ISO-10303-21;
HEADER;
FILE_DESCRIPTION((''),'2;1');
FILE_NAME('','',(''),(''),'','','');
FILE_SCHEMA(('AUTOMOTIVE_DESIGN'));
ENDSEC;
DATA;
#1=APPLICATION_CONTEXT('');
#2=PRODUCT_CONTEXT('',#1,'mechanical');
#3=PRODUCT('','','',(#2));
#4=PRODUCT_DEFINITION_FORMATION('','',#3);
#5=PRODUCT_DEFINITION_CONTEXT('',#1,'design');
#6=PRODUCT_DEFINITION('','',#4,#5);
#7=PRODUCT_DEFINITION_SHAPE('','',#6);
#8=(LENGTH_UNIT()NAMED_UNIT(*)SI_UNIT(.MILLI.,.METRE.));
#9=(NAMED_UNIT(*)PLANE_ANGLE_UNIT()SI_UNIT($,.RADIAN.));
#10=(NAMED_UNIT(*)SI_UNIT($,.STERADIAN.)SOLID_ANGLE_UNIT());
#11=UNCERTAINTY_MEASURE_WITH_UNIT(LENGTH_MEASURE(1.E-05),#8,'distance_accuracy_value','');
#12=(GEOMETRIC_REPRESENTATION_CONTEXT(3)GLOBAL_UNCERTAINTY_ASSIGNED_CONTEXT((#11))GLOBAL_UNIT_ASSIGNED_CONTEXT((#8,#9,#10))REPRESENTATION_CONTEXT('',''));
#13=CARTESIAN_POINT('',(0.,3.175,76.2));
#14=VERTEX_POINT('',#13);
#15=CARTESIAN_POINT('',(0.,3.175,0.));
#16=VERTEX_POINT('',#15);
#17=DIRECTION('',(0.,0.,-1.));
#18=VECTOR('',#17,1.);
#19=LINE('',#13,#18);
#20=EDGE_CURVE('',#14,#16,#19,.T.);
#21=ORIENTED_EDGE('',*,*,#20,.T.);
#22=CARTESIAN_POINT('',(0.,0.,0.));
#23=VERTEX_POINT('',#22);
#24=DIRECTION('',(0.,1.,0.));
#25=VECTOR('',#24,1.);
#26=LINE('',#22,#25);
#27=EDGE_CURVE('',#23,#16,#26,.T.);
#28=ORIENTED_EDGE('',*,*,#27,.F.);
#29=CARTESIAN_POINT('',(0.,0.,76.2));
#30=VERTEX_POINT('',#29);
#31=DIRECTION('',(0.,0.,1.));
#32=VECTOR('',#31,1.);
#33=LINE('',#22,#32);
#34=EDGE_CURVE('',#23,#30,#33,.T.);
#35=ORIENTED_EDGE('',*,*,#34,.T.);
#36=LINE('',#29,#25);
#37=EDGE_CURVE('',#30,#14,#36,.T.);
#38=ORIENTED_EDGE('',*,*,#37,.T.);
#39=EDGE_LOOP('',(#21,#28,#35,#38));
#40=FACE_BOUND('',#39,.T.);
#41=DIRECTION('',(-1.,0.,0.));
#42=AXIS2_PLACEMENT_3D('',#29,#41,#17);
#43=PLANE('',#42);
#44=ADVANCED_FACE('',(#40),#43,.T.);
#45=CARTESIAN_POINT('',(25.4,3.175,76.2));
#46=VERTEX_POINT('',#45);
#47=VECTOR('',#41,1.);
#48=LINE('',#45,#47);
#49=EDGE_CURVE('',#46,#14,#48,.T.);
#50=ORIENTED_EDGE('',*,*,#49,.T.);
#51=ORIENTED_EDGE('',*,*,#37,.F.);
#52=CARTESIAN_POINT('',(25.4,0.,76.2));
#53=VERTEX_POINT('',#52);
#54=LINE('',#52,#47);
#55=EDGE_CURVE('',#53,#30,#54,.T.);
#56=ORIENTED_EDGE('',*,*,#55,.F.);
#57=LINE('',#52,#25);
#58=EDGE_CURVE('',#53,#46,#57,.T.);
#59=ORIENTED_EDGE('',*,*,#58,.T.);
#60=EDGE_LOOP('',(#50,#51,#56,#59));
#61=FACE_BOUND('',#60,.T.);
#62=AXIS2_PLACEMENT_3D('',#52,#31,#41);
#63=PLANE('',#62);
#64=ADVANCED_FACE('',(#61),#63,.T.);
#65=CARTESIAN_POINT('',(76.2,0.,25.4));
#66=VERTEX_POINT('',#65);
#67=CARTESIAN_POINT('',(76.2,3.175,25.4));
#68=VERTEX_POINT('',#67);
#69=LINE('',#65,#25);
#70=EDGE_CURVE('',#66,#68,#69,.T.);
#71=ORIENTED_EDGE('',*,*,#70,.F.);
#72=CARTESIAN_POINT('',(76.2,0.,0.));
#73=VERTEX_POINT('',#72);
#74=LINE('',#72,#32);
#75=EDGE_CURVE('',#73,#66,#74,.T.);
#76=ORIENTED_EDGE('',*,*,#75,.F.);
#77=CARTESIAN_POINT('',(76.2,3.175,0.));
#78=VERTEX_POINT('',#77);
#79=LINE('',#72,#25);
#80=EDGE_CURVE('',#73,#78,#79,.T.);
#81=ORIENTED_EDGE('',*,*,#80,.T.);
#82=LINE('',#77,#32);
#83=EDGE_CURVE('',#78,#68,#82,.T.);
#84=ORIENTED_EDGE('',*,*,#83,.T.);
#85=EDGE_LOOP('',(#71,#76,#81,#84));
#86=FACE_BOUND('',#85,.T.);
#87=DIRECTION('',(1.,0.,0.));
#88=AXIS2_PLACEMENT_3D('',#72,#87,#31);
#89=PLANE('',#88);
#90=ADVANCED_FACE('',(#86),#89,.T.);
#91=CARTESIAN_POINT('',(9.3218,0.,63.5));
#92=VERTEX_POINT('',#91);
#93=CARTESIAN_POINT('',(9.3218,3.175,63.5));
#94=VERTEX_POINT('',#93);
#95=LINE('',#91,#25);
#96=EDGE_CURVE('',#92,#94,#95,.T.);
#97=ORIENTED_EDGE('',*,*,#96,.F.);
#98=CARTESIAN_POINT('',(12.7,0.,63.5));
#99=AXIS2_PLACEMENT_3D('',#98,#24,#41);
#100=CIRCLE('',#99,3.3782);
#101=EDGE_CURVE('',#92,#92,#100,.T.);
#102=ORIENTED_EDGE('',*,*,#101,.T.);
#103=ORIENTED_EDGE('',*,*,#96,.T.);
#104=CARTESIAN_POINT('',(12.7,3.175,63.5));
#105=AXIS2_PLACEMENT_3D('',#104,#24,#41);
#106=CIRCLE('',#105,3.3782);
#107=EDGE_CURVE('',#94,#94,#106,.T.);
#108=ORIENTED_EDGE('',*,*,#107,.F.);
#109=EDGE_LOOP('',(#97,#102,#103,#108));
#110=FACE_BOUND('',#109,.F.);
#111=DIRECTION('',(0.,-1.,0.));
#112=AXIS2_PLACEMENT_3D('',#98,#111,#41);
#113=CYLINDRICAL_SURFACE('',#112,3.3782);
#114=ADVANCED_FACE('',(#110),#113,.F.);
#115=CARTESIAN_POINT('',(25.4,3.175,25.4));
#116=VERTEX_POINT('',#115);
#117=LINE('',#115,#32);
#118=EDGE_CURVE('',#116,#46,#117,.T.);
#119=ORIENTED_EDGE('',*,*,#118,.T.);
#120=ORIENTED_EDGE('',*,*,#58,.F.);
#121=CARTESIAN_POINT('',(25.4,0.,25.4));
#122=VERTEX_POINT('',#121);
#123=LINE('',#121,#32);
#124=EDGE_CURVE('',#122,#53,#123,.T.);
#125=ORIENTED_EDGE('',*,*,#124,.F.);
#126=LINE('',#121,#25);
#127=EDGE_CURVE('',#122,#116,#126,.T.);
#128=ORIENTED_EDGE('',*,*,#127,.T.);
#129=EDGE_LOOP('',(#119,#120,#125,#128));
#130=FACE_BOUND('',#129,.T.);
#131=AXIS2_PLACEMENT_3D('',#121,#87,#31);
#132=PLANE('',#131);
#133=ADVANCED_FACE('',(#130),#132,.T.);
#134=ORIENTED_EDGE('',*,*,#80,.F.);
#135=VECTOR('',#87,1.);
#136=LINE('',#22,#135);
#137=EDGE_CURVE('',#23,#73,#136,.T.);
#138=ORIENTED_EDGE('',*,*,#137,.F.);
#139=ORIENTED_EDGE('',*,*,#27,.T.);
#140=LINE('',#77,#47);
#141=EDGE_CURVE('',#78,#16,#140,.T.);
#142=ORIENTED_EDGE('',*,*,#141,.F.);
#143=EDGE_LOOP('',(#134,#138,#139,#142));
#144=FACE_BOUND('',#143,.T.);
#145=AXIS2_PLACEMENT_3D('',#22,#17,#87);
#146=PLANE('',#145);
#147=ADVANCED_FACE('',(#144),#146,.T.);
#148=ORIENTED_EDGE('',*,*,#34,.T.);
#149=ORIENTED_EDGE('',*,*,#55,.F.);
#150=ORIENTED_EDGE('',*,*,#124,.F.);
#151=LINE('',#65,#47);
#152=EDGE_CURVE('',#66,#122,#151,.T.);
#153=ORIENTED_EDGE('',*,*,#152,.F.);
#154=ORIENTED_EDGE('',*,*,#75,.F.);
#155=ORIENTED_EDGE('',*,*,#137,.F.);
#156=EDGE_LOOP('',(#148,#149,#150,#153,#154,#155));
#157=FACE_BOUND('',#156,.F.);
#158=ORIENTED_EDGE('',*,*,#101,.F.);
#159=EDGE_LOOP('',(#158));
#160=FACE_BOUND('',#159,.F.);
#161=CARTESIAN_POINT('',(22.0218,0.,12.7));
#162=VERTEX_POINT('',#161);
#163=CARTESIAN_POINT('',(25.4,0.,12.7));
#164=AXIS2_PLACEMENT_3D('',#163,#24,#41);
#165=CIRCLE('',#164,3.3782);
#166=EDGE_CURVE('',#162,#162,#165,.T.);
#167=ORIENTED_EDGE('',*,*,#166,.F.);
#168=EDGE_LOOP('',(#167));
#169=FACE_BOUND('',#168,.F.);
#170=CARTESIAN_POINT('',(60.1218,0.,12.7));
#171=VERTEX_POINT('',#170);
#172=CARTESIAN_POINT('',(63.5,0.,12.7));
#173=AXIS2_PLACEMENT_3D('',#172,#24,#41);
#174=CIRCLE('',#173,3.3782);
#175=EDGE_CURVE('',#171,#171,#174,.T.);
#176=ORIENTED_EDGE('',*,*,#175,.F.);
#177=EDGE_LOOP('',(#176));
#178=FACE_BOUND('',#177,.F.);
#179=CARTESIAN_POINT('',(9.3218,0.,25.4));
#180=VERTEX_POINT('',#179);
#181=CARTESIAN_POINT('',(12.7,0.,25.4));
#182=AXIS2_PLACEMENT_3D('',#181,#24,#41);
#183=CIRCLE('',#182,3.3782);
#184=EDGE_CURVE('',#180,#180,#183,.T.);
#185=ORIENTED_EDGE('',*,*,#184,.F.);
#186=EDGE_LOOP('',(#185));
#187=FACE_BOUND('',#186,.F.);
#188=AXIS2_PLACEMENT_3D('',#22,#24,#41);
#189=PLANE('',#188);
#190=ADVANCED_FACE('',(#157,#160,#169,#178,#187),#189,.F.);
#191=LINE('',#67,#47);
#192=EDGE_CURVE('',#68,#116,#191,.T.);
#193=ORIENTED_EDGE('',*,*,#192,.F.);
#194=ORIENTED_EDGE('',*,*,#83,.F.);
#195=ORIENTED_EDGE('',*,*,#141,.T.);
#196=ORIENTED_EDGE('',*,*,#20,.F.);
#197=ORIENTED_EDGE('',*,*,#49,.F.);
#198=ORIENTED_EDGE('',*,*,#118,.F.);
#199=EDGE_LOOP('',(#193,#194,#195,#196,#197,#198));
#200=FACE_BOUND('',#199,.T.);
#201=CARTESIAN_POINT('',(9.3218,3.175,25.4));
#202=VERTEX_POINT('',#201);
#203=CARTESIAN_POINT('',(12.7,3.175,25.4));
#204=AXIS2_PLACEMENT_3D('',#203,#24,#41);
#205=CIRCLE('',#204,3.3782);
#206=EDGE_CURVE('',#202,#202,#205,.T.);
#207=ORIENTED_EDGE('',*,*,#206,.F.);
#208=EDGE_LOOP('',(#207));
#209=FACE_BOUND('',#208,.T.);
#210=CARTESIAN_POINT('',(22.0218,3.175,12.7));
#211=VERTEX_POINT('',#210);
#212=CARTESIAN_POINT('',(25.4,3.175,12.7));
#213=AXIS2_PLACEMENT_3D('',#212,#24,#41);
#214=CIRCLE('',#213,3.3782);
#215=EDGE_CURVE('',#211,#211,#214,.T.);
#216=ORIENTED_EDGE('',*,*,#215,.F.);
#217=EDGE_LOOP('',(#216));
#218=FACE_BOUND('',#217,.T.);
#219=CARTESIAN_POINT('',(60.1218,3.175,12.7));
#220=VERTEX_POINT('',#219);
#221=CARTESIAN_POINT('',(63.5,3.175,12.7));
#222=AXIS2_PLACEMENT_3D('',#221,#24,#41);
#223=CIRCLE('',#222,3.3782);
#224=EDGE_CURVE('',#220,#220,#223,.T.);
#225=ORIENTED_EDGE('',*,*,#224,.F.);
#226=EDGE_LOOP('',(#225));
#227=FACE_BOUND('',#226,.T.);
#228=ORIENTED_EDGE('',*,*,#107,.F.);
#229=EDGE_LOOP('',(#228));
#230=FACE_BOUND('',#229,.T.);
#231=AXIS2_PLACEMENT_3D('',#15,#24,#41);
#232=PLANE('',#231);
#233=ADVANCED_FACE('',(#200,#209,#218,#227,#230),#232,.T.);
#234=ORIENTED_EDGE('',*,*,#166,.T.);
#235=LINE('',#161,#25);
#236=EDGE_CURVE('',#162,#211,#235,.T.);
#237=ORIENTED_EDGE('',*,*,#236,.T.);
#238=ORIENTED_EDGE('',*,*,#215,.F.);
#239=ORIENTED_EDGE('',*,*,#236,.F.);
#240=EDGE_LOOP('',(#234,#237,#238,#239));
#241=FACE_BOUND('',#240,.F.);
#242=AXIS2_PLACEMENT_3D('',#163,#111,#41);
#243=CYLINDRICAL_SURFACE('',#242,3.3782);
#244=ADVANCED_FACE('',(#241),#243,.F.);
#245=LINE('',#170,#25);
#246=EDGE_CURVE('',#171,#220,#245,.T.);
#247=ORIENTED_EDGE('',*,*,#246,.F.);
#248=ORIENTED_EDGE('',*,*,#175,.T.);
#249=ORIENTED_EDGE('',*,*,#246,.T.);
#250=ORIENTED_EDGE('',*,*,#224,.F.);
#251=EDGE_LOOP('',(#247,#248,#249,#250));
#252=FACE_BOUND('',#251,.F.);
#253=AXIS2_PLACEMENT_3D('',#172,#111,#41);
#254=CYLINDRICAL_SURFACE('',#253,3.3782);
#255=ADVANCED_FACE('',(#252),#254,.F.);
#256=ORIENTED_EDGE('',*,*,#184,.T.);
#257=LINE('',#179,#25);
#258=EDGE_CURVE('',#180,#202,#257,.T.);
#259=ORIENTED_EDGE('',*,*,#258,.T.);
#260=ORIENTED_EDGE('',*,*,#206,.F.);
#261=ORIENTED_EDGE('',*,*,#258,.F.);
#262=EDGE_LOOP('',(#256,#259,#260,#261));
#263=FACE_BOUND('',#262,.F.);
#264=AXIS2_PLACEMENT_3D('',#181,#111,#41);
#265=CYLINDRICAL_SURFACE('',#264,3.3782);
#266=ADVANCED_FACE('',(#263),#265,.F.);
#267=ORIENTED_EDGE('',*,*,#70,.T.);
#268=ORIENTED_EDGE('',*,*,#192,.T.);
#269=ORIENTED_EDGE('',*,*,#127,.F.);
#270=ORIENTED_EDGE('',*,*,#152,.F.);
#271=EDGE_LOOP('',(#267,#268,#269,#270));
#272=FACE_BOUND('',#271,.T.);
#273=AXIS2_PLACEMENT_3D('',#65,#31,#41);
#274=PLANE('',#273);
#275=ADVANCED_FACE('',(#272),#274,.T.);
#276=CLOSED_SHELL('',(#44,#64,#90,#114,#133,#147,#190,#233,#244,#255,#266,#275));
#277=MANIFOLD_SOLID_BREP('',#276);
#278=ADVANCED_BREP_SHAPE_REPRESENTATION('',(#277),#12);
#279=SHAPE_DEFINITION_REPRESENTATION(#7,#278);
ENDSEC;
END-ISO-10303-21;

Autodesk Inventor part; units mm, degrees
ref_plane "YZ Plane" through (0, 0, 0) normal (1, 0, 0) x (0, 1, 0)
ref_plane "XZ Plane" through (0, 0, 0) normal (0, 1, 0) x (-1, 0, 0)
ref_plane "XY Plane" through (0, 0, 0) normal (0, 0, 1) x (1, 0, 0)
sketch "Sketch1" plane through (0, 0, 0) normal (0, 1, 0) x (-1, 0, 0)
  circle A0 centre (-63.5, 12.7) radius 3.3782
  circle A1 centre (-25.4, 12.7) radius 3.3782
  circle A2 centre (-12.7, 25.4) radius 3.3782
  circle A3 centre (-12.7, 63.5) radius 3.3782
  line L0 (0, 76.2) -> (0, 25.4)
  line L1 (-25.4, 76.2) -> (0, 76.2)
  line L2 (-25.4, 25.4) -> (-25.4, 76.2)
  line L3 (-76.2, 25.4) -> (-25.4, 25.4)
  line L4 (-76.2, 0) -> (-76.2, 25.4)
  line L5 (-28.829, 0) -> (-76.2, 0)
  line L6 (15.621, -25.4) -> (-28.829, -25.4)
  line L7 (-28.829, -25.4) -> (-28.829, 0)
  line L8 (0, 25.4) -> (15.621, 25.4)
  line L9 (15.621, 25.4) -> (15.621, -25.4)
  line L10 (15.621, -25.4) -> (15.621, -25.4)
  point P0 (0, 0)
  point P1 (0, 0)
  dimension "d32" = 15.621
  dimension "d44" = 50.8
extrude "Plate1" add sketch "Sketch1" along normal blind 3.175
sketch "Sketch7" plane through (0, 0, 0) normal (0, -1, 0) x (1, 0, 0)
  line L0 (28.829, -25.4) -> (-15.621, -25.4) projected
  line L1 (28.829, 0) -> (28.829, -25.4) projected
  line L2 (76.2, 0) -> (28.829, 0) projected
  line L3 (-15.621, 25.4) -> (0, 25.4) projected
  line L4 (0, 25.4) -> (0, 0)
  line L5 (0, 0) -> (28.829, 0)
  line L6 (-15.621, -25.4) -> (-15.621, 25.4)
extrude "Cut3" cut sketch "Sketch7" against normal blind 3.175
equation "\"d45\" = Thickness"
equation "\"BendRadius\" = Thickness"
equation "\"BendReliefWidth\" = Thickness"
equation "\"BendReliefDepth\" = 0.5 * Thickness"
equation "\"CornerReliefSize\" = 4 * Thickness"
equation "\"MinimumRemnant\" = 2 * Thickness"
equation "\"TransitionRadius\" = BendRadius"
equation "\"JacobiRadiusSize\" = BendRadius"
equation "\"GapSize\" = Thickness"
equation "\"d1\" = BendRadius"
equation "\"Thickness\" = 3.175"
properties part number "Rebuild Gusset Connector 2" material "Aluminum 6061"
